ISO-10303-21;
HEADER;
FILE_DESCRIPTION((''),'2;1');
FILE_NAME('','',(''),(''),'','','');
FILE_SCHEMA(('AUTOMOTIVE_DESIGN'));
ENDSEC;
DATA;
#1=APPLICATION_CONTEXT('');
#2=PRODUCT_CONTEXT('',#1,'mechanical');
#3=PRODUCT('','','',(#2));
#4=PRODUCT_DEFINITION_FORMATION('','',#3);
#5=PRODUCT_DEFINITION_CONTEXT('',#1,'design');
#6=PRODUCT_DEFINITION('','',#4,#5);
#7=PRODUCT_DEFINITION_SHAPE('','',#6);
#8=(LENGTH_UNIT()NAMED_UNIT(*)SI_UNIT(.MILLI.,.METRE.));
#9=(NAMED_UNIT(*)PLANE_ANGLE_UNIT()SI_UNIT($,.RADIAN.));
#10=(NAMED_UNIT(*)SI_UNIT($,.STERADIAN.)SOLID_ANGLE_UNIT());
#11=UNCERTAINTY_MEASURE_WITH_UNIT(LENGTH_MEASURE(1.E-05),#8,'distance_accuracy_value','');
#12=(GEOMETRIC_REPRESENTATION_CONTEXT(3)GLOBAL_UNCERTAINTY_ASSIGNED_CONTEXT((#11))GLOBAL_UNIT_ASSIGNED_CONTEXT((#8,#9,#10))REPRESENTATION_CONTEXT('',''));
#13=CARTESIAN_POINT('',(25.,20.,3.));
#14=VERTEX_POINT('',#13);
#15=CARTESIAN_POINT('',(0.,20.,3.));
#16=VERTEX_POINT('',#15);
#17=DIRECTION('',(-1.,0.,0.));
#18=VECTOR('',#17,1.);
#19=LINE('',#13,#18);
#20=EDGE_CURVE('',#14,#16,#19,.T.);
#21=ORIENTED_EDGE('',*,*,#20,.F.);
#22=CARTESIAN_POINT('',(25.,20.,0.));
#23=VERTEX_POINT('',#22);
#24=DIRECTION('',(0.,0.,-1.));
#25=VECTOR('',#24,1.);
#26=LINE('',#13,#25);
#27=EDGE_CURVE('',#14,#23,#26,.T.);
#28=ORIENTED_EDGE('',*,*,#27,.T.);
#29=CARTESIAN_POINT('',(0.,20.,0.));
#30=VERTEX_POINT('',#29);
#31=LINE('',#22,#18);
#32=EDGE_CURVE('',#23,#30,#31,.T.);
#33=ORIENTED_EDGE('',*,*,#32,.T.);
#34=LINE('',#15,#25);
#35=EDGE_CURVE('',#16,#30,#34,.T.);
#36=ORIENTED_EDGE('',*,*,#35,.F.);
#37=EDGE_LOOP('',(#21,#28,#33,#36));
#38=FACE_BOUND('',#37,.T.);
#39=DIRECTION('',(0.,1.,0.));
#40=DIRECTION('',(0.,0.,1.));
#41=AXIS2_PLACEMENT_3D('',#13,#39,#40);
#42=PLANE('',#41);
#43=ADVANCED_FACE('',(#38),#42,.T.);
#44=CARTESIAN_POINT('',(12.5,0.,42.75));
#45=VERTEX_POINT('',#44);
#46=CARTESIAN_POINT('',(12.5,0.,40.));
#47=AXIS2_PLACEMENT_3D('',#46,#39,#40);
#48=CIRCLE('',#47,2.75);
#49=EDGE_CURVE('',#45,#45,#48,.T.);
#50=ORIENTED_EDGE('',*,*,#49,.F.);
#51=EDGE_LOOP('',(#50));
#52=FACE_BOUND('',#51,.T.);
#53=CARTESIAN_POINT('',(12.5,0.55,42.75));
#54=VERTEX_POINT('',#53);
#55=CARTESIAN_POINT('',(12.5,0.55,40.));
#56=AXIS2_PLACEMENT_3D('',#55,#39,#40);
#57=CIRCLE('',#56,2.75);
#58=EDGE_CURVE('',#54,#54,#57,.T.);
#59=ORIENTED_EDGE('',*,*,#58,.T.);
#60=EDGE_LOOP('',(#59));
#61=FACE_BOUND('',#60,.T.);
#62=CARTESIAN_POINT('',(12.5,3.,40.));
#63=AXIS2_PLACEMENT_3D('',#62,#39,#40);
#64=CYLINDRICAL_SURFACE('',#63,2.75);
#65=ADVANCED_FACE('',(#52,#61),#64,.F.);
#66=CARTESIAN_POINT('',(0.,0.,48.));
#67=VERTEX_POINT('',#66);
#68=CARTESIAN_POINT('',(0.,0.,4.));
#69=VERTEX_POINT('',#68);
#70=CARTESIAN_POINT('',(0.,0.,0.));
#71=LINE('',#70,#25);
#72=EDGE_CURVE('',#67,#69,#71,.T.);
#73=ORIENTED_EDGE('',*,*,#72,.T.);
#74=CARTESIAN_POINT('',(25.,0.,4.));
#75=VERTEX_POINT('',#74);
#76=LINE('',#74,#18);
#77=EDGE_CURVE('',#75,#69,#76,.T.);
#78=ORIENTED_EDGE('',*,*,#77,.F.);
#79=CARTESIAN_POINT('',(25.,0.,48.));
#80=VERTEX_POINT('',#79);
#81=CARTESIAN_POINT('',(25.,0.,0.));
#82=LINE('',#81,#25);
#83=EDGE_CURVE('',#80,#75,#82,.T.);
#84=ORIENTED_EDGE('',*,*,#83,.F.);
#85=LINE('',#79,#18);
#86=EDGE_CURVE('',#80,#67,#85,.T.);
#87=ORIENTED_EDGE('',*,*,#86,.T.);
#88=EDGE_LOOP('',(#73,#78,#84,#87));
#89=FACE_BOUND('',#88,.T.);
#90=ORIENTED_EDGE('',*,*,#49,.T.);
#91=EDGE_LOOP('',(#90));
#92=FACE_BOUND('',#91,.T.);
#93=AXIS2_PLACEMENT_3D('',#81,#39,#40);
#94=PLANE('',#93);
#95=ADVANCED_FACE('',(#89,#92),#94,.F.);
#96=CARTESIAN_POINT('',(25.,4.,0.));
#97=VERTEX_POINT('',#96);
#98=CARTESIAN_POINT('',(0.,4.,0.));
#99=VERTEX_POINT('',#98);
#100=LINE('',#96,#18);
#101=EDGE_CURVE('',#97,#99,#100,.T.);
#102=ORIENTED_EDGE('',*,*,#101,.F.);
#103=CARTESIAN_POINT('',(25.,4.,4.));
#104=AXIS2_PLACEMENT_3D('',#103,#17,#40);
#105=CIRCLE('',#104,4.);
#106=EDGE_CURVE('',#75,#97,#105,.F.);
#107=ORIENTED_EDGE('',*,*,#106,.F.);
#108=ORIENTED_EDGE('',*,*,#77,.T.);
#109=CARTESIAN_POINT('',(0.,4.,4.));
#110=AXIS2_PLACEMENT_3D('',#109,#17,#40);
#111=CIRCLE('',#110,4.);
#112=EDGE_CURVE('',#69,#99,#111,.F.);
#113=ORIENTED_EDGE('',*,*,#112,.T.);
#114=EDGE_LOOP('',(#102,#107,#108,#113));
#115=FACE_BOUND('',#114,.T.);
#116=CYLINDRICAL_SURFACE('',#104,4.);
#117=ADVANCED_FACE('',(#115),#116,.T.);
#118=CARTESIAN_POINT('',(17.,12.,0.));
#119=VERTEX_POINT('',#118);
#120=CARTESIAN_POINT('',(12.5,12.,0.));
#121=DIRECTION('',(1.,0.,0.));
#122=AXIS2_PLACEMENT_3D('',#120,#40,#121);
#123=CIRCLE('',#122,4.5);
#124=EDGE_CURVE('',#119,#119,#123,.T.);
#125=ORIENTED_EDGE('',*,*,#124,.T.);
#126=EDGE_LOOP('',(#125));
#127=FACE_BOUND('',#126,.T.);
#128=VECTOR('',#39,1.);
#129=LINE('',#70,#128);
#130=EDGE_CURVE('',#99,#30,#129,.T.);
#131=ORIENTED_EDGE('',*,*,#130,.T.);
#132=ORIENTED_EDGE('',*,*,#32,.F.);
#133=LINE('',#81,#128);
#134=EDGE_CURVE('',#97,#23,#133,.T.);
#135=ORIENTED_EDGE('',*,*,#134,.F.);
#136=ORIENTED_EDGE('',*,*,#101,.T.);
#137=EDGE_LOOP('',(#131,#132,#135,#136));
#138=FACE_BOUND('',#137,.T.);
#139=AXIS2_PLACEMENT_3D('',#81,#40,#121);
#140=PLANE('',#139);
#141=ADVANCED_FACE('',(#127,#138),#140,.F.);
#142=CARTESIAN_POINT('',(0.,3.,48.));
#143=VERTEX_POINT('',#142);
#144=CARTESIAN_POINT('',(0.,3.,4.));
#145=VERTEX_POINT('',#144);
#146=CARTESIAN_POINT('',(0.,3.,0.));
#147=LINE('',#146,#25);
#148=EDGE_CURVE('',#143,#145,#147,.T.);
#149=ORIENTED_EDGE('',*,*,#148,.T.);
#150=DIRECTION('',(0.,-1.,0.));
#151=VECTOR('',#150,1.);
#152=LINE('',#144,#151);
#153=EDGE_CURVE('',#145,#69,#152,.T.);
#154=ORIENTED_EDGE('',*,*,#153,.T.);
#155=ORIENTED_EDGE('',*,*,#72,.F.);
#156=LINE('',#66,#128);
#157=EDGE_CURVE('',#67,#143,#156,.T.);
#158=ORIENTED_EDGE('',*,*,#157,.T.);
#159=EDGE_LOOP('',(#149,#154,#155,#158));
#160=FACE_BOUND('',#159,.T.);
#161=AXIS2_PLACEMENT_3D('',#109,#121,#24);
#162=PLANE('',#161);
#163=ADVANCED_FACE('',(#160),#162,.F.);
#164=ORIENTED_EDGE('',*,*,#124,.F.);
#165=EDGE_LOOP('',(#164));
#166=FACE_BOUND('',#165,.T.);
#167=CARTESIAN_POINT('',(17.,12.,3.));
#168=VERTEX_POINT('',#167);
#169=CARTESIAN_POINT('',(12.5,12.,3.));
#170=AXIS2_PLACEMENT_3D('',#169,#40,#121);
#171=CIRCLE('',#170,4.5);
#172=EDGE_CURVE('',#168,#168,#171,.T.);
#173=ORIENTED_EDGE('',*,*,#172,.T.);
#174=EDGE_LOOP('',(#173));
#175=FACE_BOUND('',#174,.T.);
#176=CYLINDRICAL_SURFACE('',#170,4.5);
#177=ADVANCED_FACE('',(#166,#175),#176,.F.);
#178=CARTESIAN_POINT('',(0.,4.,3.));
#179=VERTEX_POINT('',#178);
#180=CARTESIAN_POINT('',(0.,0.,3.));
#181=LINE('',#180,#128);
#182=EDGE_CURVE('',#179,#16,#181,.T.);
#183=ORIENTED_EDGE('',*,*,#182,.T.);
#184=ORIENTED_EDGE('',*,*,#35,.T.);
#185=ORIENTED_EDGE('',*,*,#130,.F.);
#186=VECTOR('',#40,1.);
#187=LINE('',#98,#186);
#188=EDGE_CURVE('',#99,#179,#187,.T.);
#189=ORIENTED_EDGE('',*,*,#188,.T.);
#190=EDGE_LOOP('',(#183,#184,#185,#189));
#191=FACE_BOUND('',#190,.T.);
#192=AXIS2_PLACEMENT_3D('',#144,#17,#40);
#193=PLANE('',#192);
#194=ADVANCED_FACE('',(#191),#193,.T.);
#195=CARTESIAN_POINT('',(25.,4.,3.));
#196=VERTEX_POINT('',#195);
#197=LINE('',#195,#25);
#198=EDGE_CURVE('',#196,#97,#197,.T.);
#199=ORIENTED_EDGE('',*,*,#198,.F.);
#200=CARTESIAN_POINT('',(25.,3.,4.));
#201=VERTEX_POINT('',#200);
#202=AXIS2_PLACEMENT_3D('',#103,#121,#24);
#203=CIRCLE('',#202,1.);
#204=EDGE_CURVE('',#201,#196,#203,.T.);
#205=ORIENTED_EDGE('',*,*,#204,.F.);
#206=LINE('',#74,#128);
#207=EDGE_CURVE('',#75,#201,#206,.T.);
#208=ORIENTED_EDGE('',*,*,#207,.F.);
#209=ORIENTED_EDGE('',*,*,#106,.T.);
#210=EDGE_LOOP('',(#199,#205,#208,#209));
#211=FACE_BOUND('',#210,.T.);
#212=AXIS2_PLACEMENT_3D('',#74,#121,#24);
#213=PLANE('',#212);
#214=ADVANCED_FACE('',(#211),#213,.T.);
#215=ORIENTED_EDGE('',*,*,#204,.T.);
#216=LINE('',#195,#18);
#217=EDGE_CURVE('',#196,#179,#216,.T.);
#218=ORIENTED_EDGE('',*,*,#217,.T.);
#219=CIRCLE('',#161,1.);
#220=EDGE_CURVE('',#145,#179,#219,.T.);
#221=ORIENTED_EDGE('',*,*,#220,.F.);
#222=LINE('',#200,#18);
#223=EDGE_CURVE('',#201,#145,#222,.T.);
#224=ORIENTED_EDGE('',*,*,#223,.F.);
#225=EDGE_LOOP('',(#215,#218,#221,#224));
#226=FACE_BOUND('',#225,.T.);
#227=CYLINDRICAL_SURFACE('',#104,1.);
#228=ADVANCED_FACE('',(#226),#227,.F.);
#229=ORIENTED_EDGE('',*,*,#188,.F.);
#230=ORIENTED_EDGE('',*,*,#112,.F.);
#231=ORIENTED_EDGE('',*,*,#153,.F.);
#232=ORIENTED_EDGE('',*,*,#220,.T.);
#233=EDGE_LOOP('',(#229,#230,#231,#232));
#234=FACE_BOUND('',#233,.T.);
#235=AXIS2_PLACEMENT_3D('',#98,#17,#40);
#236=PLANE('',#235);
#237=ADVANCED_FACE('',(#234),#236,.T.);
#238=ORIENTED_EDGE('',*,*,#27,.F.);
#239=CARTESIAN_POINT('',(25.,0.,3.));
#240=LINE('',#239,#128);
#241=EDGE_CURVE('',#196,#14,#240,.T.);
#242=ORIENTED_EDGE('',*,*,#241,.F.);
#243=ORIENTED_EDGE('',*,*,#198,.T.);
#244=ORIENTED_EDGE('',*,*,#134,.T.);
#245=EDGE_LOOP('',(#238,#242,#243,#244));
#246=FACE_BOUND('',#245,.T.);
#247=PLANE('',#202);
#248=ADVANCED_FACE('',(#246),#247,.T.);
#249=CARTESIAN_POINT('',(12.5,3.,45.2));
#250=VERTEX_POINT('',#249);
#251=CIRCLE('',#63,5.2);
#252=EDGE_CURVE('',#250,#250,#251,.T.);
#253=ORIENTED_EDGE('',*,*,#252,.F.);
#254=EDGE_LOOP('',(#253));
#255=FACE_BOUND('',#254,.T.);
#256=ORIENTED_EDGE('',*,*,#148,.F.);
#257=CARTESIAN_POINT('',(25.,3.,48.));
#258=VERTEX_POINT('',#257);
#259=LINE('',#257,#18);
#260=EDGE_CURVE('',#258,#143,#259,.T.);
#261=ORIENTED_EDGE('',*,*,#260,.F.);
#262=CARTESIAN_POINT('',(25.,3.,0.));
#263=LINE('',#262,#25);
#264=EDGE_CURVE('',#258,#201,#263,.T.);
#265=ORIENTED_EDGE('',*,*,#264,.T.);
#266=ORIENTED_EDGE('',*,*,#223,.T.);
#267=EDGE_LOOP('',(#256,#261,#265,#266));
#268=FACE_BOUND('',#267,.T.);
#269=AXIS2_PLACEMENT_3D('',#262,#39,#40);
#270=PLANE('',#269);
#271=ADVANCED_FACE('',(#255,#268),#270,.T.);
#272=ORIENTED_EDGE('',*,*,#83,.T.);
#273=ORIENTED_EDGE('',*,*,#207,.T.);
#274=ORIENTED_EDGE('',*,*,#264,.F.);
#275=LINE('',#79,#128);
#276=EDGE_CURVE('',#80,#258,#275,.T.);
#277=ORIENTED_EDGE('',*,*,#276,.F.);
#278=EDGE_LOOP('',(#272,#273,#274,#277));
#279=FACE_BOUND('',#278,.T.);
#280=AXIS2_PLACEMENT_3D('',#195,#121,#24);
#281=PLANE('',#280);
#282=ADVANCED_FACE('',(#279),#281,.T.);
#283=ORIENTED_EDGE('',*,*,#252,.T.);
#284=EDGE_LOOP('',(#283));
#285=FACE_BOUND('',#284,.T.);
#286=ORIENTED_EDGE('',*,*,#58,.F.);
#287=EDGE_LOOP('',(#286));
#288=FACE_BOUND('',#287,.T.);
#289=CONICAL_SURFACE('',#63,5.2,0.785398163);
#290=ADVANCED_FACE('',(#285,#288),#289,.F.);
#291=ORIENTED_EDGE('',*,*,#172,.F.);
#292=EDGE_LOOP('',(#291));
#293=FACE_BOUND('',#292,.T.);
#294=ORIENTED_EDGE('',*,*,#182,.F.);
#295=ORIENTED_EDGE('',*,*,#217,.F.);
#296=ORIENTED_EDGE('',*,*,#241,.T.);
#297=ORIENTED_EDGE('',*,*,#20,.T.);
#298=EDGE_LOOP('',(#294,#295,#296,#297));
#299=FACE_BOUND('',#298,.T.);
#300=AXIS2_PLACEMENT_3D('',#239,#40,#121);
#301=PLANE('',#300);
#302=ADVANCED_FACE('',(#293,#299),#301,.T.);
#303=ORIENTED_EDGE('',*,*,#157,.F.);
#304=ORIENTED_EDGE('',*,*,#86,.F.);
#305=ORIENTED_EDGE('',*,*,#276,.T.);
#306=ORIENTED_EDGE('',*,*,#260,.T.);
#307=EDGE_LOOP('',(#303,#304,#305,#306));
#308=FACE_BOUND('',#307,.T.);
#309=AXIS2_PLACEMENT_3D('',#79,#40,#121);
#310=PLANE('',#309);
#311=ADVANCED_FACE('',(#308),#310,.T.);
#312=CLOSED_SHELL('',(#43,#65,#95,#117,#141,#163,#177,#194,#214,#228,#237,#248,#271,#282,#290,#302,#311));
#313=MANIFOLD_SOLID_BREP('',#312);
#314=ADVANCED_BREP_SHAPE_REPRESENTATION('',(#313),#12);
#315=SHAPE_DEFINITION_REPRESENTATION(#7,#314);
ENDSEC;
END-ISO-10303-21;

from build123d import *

# Parameters (mm, degrees)
T_LE_DE_BASE_PLI_E1_DEPTH = 25
D_GAGEMENT_M81_D          = 9


# Sheet-metal steps are written as plain solids
with BuildPart() as part:
    # Esquisse1 → Tôle de base pliée1 (new body)
    with BuildSketch(Plane(origin=(0, 0, 0), x_dir=(0, 0, -1), z_dir=(1, 0, 0))):
        with BuildLine():
            Line((0, 20), (0, 4))
            ThreePointArc((0, 4), (-1.171572875, 1.171572875), (-4, 0))
            Line((-4, 0), (-48, 0))
            Line((-48, 0), (-48, 3))
            Line((-48, 3), (-4, 3))
            ThreePointArc((-4, 3), (-3.292893219, 3.292893219), (-3, 4))
            Line((-3, 4), (-3, 20))
            Line((-3, 20), (0, 20))
        make_face()
    extrude(amount=T_LE_DE_BASE_PLI_E1_DEPTH)

    # Esquisse3 → Fraisage pour vis à tête fraisée M51 (revolve, cut)
    with BuildSketch(Plane(origin=(12.5, 3, 40), x_dir=(0, 0, 1), z_dir=(1, 0, 0))):
        Polygon((0, 0), (0, 3), (2.75, 3), (2.75, 2.45), (5.2, 0), align=None)
    revolve(axis=Axis((12.5, 9.35, 40), (0, -1, 0)), mode=Mode.SUBTRACT)

    # Dégagement M81 (through all)
    with Locations(Plane.XY.offset(3)):
        with Locations((12.5, 12)):
            Hole(D_GAGEMENT_M81_D / 2)


solid = part.part
